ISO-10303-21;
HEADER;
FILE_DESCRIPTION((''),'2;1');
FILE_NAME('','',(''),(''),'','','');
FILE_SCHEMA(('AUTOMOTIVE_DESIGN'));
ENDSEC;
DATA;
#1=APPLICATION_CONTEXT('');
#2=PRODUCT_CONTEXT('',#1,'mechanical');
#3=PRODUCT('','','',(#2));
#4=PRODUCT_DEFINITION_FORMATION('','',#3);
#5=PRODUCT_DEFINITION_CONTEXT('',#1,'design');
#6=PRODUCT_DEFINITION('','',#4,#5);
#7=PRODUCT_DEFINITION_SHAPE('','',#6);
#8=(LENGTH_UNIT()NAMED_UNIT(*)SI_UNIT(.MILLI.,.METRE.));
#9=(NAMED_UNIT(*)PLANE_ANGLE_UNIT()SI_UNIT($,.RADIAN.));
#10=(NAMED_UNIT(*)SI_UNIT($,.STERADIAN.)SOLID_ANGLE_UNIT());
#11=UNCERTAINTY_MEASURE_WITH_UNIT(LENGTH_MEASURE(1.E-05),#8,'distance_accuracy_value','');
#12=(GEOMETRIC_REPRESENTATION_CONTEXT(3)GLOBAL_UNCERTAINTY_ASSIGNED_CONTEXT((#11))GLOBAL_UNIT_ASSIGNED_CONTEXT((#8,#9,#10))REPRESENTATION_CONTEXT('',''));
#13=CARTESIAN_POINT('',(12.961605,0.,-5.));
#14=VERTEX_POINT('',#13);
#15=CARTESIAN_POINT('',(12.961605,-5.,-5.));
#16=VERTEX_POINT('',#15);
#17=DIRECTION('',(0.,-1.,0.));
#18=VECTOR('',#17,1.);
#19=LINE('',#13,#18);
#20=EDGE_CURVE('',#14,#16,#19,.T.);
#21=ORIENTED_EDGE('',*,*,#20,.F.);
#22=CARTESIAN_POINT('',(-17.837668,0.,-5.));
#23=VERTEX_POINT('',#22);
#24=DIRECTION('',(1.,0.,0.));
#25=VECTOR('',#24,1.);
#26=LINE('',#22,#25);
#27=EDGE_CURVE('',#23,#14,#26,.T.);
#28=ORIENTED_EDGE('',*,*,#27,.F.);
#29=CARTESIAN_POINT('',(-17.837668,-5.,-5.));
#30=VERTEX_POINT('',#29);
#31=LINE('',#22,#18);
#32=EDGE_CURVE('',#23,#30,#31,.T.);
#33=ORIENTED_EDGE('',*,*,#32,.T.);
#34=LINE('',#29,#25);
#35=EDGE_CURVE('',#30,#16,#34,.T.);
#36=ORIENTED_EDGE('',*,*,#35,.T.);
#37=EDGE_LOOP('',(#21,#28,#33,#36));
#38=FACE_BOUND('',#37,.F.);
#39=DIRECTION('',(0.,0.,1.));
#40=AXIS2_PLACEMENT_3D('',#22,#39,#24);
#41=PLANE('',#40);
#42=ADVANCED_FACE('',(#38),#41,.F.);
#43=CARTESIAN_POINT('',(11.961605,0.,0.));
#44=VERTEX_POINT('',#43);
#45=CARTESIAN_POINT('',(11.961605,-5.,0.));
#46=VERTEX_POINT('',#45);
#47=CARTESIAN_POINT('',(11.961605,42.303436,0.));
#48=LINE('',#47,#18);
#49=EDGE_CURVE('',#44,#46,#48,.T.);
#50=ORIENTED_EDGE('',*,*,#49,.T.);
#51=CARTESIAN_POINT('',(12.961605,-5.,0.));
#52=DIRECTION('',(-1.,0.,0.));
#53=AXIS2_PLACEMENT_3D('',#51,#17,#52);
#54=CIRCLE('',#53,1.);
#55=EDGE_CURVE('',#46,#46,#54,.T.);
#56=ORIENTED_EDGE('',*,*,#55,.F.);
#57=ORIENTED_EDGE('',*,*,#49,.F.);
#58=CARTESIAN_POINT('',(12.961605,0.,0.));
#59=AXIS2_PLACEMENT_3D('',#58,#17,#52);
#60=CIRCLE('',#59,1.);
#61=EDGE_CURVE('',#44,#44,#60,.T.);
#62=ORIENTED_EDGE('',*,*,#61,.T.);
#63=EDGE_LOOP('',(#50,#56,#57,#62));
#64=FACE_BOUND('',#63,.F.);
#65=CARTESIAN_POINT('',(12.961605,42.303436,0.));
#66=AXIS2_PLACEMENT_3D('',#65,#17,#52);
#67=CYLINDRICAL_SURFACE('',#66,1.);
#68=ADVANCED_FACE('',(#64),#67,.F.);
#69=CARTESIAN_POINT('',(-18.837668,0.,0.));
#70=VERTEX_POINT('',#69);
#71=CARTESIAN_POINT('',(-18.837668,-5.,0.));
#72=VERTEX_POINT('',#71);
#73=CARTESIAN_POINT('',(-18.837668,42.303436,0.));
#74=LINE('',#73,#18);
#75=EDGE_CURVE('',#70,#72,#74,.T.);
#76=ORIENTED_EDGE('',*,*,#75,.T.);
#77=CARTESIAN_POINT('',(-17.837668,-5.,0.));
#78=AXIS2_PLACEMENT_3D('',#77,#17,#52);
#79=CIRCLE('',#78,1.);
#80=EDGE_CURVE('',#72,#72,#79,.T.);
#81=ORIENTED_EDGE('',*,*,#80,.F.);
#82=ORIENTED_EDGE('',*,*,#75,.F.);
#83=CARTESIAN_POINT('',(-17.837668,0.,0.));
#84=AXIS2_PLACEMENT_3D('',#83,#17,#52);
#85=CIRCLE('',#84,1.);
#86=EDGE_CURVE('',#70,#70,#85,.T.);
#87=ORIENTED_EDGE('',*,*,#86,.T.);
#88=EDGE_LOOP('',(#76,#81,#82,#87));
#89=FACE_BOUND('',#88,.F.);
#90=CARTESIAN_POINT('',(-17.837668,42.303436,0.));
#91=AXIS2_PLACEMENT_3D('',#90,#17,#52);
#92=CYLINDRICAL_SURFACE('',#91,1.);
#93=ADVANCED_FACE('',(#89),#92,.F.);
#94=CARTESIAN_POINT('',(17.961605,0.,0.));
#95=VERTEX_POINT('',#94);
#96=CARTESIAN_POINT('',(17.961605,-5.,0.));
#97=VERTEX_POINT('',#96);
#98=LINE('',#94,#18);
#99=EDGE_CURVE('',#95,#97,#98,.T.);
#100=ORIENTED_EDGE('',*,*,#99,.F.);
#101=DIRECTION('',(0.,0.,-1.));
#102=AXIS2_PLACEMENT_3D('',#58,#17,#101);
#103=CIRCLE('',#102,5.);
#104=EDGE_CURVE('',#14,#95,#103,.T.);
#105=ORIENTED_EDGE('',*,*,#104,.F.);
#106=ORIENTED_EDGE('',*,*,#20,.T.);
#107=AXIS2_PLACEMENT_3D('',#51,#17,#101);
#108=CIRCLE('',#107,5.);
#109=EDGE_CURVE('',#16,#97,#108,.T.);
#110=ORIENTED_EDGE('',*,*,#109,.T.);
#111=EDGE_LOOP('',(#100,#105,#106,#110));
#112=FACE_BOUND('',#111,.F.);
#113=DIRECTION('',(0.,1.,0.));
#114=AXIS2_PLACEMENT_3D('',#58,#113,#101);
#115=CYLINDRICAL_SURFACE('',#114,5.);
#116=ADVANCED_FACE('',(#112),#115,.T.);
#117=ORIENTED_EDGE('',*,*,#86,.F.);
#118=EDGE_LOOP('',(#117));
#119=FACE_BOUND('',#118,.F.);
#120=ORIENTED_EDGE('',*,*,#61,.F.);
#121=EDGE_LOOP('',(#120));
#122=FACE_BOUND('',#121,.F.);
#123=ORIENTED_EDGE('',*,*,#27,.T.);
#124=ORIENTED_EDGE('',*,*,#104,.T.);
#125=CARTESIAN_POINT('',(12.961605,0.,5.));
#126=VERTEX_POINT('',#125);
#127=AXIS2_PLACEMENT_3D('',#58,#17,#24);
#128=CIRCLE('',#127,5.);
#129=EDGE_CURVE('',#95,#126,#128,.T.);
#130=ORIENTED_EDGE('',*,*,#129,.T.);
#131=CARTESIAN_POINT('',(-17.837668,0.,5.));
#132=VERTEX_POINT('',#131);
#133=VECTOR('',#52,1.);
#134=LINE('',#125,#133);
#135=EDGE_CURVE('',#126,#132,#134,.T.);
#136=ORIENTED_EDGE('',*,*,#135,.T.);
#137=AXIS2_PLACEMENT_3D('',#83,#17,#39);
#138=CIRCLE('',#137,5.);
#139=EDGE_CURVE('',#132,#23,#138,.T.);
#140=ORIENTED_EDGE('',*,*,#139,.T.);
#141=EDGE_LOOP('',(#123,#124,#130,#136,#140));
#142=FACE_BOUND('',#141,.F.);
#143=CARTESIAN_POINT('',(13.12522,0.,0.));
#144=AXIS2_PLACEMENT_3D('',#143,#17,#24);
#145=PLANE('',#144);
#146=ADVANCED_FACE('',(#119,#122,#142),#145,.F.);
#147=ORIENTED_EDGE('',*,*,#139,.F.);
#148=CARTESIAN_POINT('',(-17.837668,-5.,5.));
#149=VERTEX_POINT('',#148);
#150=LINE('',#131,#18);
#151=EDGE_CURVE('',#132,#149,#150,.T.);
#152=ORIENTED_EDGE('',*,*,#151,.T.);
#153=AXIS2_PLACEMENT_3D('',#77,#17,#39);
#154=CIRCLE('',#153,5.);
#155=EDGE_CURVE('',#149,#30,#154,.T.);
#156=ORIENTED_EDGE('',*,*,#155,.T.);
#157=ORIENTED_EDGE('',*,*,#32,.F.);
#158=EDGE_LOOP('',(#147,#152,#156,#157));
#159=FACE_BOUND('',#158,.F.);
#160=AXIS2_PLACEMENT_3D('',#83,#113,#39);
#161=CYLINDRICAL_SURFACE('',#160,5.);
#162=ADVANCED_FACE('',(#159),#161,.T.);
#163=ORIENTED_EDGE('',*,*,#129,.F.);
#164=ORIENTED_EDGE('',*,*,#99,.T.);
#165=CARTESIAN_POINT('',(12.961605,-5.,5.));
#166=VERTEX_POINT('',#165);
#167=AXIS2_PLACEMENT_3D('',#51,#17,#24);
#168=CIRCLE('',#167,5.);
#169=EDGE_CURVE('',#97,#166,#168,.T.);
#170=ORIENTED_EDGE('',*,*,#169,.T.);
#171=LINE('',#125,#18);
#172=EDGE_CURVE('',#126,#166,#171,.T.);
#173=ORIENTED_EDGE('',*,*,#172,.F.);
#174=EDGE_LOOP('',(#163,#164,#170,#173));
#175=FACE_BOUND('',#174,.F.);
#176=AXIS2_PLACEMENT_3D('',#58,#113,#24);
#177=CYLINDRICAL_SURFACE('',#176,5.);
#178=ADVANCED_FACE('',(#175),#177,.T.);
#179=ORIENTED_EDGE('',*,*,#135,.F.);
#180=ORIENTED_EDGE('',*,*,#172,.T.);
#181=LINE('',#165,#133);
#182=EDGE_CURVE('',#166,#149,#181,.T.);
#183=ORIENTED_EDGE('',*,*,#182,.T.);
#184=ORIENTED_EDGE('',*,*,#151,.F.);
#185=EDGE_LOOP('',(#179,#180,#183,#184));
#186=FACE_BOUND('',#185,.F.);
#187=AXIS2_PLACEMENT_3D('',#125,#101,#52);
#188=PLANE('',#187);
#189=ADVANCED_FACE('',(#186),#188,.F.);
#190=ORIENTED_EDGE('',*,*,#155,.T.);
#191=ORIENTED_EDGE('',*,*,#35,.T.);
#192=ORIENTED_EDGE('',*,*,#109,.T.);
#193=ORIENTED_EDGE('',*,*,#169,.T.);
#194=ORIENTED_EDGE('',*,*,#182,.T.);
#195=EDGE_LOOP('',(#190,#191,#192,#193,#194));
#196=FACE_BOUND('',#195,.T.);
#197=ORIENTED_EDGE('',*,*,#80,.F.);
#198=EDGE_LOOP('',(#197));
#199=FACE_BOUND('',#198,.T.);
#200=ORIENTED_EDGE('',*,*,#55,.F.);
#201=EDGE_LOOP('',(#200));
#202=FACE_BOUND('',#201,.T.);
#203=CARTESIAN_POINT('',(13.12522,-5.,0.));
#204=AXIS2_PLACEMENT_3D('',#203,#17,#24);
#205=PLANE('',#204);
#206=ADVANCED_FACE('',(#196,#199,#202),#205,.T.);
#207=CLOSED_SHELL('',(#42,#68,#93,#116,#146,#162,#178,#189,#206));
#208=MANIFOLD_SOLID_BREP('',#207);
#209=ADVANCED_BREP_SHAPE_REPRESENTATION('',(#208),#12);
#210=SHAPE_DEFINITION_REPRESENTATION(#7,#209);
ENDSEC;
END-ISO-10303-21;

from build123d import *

# Parameters (mm, degrees)
F3_DEPTH = 5
F4_D     = 2
F5_D     = 2


# Not quite as in the source:
# - a feature names something its author has since deleted; it is built from what else it names


with BuildPart() as f3:
    # F2 (on Front) → F3 (new body)
    with BuildSketch(Plane.XZ):
        with BuildLine():
            ThreePointArc((12.9616053321, -5), (16.4971392381, -3.5355339059), (17.9616053321, 0))
            ThreePointArc((17.9616053321, 0), (16.4971392381, 3.5355339059), (12.9616053321, 5))
            ThreePointArc((12.9616053321, 5), (7.9616053321, 0), (12.9616053321, -5))
        make_face()
        with BuildLine():
            ThreePointArc((12.9616053321, -5), (7.9616053321, 0), (12.9616053321, 5))
            Line((12.9616053321, 5), (-17.8376678377, 5))
            ThreePointArc((-17.8376678377, 5), (-14.3021339318, 3.5355339059), (-12.8376678377, 0))
            ThreePointArc((-12.8376678377, 0), (-14.3021339318, -3.5355339059), (-17.8376678377, -5))
            Line((-17.8376678377, -5), (12.9616053321, -5))
        make_face()
        with BuildLine():
            ThreePointArc((-12.8376678377, 0), (-14.3021339318, 3.5355339059), (-17.8376678377, 5))
            ThreePointArc((-17.8376678377, 5), (-22.8376678377, 0), (-17.8376678377, -5))
            ThreePointArc((-17.8376678377, -5), (-14.3021339318, -3.5355339059), (-12.8376678377, 0))
        make_face()
    extrude(amount=F3_DEPTH)

    # F4 (through all)
    with Locations(Plane(origin=(0, 0, 0), x_dir=(1, 0, 0), z_dir=(0, 1, 0))):
        with Locations((12.9616053321, 0)):
            Hole(F4_D / 2)

    # F5 (through all)
    with Locations(Plane(origin=(0, 0, 0), x_dir=(1, 0, 0), z_dir=(0, 1, 0))):
        with Locations((-17.8376678377, 0)):
            Hole(F5_D / 2)


solid = f3.part
